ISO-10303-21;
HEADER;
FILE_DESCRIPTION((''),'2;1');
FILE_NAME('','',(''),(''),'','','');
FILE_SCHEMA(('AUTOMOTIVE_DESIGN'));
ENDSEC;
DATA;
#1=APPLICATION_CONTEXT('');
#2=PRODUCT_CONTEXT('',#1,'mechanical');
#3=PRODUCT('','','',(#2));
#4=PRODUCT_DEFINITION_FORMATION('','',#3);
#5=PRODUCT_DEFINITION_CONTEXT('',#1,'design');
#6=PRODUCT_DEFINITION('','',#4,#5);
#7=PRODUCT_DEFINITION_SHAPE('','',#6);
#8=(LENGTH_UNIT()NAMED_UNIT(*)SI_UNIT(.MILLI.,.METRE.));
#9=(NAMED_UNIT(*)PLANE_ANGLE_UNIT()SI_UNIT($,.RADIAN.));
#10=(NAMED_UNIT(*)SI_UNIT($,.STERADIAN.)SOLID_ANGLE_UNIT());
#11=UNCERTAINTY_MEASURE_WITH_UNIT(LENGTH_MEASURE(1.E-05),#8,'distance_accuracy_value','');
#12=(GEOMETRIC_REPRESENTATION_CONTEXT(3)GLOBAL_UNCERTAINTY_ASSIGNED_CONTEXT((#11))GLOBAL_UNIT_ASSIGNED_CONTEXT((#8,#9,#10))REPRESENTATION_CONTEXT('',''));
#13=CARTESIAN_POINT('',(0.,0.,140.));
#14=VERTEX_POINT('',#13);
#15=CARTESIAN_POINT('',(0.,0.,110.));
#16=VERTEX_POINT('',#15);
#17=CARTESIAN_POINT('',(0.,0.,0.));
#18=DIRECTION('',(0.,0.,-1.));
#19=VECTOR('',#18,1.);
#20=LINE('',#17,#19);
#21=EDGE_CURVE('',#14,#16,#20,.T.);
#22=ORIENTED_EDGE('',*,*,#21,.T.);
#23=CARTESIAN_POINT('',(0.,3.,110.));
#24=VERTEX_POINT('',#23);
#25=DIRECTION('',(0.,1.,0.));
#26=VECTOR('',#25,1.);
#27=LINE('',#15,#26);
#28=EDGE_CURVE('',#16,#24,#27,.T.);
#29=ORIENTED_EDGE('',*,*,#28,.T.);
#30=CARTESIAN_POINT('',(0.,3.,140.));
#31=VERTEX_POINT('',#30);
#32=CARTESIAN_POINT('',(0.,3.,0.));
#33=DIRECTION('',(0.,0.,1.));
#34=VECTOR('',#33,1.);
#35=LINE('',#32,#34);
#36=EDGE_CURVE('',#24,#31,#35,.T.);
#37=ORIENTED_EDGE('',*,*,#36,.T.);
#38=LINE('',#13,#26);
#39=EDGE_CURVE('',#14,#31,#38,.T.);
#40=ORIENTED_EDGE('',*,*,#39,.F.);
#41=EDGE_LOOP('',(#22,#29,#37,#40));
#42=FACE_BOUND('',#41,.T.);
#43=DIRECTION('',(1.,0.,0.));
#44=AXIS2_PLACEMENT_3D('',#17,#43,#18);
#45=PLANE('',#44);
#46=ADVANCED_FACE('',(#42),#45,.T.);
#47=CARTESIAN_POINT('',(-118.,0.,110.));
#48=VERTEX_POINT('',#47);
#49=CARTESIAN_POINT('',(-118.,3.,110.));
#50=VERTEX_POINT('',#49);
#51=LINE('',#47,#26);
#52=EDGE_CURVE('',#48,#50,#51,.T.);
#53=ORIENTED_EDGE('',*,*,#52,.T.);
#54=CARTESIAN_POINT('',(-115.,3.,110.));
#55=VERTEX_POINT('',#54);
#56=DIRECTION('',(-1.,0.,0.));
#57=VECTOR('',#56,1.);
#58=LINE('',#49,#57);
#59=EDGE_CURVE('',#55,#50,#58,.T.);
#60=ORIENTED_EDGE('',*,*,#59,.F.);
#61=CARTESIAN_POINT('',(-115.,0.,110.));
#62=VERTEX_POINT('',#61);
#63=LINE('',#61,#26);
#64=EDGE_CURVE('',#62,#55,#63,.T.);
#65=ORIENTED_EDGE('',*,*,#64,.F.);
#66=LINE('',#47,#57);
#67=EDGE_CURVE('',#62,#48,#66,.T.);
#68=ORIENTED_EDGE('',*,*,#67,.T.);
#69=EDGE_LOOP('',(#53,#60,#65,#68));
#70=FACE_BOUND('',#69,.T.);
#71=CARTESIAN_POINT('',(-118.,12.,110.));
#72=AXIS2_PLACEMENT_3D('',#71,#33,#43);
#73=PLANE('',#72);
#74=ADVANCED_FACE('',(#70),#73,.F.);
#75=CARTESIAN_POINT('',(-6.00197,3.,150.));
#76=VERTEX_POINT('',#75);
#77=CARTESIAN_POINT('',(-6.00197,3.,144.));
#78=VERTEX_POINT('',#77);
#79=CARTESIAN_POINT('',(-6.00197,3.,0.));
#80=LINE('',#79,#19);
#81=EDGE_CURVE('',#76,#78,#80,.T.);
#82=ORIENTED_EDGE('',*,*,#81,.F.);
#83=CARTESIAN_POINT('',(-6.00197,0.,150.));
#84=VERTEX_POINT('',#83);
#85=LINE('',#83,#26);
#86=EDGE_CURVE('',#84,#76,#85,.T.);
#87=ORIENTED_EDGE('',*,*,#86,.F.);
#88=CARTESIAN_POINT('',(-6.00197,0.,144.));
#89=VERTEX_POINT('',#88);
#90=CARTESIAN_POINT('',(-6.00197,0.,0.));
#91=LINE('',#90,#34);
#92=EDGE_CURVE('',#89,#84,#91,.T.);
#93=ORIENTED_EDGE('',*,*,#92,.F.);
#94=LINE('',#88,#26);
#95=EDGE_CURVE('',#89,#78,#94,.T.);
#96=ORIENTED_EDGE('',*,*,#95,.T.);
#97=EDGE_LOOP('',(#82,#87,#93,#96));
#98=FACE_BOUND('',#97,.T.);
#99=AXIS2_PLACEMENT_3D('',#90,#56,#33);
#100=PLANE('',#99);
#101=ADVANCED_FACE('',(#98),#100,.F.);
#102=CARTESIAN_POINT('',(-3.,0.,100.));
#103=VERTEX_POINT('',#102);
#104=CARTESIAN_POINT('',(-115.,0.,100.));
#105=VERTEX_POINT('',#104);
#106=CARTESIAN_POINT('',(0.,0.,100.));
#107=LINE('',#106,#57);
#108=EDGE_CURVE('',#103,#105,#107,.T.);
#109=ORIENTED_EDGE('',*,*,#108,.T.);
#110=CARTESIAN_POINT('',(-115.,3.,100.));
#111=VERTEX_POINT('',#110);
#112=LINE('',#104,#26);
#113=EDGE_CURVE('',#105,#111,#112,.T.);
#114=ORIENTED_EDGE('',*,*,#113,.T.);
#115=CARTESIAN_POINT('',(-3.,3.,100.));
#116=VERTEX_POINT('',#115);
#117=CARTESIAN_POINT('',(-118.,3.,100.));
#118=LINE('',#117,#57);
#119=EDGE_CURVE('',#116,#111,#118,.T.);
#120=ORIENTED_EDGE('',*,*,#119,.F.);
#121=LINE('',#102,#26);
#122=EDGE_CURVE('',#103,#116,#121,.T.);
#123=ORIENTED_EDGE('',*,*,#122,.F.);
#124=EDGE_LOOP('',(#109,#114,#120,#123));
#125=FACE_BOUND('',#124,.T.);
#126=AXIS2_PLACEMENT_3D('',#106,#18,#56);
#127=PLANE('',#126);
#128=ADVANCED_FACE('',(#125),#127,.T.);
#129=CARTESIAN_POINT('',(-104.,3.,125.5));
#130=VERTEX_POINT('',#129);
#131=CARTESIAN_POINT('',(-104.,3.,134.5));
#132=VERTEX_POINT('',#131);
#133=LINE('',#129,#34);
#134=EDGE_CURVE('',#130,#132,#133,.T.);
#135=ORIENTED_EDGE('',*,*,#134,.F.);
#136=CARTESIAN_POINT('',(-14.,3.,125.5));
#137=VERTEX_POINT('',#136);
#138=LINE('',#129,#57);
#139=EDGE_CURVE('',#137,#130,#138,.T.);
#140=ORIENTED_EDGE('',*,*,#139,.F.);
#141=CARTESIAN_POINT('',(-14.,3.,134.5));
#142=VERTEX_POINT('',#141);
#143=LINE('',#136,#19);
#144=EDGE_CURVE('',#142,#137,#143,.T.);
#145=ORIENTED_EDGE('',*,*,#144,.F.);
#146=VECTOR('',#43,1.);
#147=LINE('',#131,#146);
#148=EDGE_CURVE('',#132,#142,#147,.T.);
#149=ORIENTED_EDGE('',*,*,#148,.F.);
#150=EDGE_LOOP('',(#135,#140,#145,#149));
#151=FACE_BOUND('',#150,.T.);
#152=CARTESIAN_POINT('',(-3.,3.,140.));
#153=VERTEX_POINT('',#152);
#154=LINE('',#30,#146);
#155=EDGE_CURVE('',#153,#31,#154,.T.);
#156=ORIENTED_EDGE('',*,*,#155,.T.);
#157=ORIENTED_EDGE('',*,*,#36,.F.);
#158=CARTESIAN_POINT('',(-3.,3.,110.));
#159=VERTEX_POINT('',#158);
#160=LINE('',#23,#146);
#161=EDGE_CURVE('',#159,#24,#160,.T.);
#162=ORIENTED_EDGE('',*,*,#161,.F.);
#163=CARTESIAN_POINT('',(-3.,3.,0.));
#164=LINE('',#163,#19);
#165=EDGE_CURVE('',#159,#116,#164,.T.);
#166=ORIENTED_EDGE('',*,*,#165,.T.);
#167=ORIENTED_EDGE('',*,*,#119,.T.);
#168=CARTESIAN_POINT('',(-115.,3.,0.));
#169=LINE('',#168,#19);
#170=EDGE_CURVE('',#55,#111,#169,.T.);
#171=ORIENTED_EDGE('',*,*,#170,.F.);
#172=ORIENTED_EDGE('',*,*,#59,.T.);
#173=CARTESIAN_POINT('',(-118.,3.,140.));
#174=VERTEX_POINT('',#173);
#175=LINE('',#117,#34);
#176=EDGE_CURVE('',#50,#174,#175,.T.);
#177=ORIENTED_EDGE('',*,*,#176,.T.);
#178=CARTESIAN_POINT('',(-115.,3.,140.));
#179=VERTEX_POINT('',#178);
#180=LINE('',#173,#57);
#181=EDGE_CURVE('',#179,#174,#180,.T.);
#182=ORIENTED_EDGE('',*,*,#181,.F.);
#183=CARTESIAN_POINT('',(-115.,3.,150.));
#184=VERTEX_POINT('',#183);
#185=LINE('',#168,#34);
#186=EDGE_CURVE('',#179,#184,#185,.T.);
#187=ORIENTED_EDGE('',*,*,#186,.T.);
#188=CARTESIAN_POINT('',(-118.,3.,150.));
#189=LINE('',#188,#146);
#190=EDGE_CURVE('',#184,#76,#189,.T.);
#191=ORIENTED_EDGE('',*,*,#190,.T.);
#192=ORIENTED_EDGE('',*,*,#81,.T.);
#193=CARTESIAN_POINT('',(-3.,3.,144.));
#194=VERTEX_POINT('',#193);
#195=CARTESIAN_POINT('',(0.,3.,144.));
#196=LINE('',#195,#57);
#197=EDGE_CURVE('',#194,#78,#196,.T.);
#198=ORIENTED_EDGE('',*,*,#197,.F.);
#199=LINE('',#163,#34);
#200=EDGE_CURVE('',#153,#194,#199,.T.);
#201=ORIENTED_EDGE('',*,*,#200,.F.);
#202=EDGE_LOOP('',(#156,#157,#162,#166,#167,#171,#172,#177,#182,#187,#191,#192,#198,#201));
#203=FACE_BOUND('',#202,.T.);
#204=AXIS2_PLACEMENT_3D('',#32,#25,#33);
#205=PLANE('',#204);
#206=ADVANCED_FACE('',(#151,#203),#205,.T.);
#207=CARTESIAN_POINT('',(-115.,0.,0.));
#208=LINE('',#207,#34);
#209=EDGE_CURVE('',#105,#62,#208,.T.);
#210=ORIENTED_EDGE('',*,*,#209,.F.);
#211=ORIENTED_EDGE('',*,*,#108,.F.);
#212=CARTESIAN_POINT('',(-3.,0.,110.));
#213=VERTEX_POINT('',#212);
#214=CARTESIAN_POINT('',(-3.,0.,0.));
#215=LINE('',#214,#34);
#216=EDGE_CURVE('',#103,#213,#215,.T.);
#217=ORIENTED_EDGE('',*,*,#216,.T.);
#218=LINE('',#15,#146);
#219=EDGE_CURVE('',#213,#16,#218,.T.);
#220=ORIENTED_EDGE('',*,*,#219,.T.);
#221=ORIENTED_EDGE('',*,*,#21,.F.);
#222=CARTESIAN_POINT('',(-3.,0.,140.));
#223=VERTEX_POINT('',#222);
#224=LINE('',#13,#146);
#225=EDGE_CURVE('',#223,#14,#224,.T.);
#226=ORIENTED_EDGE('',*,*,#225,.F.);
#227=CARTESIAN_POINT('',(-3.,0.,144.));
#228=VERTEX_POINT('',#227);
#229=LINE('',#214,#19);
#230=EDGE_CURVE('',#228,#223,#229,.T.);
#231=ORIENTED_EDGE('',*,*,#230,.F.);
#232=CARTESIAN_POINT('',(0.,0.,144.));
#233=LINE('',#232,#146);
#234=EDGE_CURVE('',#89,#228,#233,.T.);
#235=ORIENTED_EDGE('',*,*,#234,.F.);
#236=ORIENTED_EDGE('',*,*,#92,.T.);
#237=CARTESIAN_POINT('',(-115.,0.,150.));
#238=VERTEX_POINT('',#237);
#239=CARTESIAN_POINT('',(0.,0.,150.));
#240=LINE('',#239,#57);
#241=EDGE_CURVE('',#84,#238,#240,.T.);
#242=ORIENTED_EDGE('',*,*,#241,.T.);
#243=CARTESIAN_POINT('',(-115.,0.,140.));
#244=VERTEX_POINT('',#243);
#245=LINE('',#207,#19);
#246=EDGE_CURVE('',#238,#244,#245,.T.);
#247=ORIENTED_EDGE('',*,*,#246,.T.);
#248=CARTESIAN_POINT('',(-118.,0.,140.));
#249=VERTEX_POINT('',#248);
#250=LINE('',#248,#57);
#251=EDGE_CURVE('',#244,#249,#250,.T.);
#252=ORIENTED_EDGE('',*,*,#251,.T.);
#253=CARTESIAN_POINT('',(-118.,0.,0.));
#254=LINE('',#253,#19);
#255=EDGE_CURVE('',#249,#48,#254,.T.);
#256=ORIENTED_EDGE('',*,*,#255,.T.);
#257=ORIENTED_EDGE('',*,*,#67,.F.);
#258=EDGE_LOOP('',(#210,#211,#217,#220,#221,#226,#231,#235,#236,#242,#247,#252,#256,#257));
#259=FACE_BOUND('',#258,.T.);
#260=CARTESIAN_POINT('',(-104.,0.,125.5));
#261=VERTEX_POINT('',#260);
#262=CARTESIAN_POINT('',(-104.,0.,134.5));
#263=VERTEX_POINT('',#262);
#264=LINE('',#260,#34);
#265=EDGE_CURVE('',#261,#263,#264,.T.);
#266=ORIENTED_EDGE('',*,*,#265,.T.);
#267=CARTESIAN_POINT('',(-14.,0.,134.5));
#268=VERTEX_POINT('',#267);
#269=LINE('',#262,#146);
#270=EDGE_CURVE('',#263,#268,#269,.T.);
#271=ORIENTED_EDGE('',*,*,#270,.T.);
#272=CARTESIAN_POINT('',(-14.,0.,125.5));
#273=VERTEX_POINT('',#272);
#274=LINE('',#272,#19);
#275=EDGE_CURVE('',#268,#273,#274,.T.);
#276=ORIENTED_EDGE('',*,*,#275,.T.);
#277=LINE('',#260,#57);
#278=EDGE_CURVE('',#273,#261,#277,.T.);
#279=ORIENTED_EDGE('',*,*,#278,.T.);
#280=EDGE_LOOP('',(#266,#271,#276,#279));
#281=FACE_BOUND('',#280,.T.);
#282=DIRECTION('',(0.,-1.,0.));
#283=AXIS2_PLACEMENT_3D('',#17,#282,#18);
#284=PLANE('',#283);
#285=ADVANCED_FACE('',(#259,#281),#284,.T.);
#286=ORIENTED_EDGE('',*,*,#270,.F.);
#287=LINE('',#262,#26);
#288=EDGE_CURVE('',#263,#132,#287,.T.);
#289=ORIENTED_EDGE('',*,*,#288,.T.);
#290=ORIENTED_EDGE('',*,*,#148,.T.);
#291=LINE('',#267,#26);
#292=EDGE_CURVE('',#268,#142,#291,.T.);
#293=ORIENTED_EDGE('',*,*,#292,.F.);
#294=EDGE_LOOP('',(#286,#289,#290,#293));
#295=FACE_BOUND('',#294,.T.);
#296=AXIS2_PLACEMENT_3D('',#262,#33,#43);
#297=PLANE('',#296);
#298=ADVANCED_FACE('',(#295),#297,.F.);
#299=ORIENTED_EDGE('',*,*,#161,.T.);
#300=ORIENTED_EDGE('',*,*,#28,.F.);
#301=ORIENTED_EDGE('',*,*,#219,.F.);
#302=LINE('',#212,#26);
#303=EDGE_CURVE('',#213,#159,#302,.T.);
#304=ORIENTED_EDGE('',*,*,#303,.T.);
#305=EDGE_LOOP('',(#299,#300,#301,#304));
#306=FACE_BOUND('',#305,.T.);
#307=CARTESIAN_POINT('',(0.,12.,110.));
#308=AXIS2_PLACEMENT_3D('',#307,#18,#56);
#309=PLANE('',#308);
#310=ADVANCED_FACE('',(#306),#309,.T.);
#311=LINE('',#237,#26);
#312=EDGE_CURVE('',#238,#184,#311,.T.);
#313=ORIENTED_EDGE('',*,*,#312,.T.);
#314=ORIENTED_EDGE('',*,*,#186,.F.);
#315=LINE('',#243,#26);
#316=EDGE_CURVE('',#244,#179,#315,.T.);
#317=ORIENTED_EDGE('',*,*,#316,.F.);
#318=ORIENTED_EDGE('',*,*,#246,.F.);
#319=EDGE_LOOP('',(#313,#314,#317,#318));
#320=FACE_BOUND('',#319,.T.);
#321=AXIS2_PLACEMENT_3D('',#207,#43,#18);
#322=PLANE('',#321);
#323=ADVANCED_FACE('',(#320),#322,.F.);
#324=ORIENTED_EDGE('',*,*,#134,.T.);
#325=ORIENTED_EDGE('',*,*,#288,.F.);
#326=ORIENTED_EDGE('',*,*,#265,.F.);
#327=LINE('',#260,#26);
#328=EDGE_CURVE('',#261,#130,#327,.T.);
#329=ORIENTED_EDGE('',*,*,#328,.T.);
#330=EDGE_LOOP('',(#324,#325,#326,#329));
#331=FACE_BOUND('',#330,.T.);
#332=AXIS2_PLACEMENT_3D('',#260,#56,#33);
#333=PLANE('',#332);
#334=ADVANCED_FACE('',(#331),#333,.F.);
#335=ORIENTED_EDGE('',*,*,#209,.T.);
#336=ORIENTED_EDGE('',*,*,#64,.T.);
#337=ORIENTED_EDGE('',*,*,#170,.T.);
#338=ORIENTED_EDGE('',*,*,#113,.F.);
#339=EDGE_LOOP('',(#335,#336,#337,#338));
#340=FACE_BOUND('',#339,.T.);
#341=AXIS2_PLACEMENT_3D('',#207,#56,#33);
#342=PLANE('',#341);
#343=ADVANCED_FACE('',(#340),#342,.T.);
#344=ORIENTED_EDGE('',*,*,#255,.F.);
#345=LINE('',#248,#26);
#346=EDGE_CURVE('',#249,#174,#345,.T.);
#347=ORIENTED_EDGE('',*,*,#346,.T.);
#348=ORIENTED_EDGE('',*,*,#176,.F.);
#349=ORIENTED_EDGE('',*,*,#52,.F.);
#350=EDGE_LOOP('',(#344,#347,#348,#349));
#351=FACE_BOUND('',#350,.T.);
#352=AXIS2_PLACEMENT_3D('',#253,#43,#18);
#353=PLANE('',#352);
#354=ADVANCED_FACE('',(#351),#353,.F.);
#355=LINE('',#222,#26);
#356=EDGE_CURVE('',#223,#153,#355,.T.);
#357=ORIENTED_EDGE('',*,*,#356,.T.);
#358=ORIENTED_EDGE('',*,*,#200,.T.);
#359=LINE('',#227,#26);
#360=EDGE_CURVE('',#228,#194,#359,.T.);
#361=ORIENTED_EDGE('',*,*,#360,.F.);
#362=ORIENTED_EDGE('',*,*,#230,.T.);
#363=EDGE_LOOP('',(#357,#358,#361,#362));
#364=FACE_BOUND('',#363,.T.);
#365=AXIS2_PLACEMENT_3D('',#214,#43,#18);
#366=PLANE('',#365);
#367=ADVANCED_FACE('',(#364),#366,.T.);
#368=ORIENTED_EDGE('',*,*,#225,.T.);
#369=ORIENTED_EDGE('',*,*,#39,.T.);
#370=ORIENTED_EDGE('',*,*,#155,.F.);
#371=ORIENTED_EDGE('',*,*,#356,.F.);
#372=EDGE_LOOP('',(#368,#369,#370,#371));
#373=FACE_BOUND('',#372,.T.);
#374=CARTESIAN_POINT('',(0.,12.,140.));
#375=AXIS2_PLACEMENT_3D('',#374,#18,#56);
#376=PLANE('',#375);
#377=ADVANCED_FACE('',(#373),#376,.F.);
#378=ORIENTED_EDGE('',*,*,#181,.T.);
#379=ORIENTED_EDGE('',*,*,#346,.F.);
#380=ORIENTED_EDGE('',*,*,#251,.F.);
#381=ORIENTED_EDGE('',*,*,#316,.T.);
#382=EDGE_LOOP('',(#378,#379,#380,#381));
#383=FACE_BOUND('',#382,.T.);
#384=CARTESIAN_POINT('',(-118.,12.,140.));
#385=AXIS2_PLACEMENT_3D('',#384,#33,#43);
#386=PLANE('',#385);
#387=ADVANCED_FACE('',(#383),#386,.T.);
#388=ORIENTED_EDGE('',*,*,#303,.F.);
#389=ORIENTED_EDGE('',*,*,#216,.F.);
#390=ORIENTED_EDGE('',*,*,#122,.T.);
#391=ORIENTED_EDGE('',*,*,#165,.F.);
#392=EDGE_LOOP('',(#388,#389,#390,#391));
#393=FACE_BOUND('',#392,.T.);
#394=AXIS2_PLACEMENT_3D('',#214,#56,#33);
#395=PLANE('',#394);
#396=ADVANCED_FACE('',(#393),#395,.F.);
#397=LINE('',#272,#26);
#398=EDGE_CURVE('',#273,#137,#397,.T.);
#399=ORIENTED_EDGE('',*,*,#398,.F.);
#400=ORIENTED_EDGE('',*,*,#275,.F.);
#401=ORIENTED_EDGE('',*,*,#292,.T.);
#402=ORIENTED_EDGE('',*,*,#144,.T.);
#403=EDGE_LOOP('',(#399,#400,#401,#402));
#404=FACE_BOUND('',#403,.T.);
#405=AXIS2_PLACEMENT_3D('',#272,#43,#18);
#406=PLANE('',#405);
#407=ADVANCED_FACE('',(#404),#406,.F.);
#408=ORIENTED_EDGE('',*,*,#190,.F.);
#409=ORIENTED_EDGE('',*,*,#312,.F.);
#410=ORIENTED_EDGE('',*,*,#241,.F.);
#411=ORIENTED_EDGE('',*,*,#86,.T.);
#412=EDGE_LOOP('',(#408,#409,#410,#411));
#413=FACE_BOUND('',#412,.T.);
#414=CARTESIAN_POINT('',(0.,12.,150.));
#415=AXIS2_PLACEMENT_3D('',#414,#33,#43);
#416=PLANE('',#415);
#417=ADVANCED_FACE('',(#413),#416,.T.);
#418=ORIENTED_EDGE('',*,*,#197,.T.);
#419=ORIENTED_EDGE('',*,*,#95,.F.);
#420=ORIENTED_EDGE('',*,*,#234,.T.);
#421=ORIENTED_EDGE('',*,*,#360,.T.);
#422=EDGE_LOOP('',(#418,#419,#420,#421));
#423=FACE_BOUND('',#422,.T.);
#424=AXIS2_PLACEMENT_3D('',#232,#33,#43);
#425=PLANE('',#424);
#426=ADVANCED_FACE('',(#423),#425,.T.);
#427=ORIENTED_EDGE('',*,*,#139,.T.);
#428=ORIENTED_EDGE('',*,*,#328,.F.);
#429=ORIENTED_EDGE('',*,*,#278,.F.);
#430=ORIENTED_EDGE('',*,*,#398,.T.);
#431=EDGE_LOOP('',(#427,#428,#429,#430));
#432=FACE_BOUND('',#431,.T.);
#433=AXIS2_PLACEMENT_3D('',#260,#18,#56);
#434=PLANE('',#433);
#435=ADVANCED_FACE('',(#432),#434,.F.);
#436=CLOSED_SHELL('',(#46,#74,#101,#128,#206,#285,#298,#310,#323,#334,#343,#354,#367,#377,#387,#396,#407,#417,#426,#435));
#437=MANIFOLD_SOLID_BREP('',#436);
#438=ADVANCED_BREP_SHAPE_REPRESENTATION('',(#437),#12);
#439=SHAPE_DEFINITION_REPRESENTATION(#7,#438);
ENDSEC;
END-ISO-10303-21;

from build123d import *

# Parameters (mm, degrees)
LED_1_OUTLINE_R     = 2.25
LED_1_DEPTH         = 3
SKETCH_1_W          = 90
SKETCH_1_H          = 9
CUT_EXTRUDE_1_DEPTH = 3


# Read off the part's stored shape, not the designer's step: 基体零件-LED板-1
with BuildPart() as part:
    # 基体零件-LED板-1 outline → 基体零件-LED板-1 (new body)
    with BuildSketch(Plane(origin=(0, 0, 0), x_dir=(1, 0, 0), z_dir=(0, 1, 0))):
        Polygon((-3, -140), (0, -140), (0, -110), (-3, -110), (-3, -100), (-115, -100), (-115, -110), (-118, -110), (-118, -140), (-115, -140), (-115, -150), (-6.001970153, -150), (-6.001970153, -144), (-3, -144), align=None)
        with Locations((-90.5, -130)):
            Circle(LED_1_OUTLINE_R, mode=Mode.SUBTRACT)
        with Locations((-81.5, -130)):
            Circle(LED_1_OUTLINE_R, mode=Mode.SUBTRACT)
        with Locations((-72.5, -130)):
            Circle(LED_1_OUTLINE_R, mode=Mode.SUBTRACT)
        with Locations((-63.5, -130)):
            Circle(LED_1_OUTLINE_R, mode=Mode.SUBTRACT)
        with Locations((-54.5, -130)):
            Circle(LED_1_OUTLINE_R, mode=Mode.SUBTRACT)
        with Locations((-45.5, -130)):
            Circle(LED_1_OUTLINE_R, mode=Mode.SUBTRACT)
        with Locations((-36.5, -130)):
            Circle(LED_1_OUTLINE_R, mode=Mode.SUBTRACT)
        with Locations((-27.5, -130)):
            Circle(LED_1_OUTLINE_R, mode=Mode.SUBTRACT)
    extrude(amount=LED_1_DEPTH)

    # 草图1 → 切除-拉伸1 (cut)
    with BuildSketch(Plane(origin=(0, 3, 0), x_dir=(1, 0, 0), z_dir=(0, 1, 0))):
        with Locations((-59, -130)):
            Rectangle(SKETCH_1_W, SKETCH_1_H)
    extrude(amount=-CUT_EXTRUDE_1_DEPTH, mode=Mode.SUBTRACT)


solid = part.part
